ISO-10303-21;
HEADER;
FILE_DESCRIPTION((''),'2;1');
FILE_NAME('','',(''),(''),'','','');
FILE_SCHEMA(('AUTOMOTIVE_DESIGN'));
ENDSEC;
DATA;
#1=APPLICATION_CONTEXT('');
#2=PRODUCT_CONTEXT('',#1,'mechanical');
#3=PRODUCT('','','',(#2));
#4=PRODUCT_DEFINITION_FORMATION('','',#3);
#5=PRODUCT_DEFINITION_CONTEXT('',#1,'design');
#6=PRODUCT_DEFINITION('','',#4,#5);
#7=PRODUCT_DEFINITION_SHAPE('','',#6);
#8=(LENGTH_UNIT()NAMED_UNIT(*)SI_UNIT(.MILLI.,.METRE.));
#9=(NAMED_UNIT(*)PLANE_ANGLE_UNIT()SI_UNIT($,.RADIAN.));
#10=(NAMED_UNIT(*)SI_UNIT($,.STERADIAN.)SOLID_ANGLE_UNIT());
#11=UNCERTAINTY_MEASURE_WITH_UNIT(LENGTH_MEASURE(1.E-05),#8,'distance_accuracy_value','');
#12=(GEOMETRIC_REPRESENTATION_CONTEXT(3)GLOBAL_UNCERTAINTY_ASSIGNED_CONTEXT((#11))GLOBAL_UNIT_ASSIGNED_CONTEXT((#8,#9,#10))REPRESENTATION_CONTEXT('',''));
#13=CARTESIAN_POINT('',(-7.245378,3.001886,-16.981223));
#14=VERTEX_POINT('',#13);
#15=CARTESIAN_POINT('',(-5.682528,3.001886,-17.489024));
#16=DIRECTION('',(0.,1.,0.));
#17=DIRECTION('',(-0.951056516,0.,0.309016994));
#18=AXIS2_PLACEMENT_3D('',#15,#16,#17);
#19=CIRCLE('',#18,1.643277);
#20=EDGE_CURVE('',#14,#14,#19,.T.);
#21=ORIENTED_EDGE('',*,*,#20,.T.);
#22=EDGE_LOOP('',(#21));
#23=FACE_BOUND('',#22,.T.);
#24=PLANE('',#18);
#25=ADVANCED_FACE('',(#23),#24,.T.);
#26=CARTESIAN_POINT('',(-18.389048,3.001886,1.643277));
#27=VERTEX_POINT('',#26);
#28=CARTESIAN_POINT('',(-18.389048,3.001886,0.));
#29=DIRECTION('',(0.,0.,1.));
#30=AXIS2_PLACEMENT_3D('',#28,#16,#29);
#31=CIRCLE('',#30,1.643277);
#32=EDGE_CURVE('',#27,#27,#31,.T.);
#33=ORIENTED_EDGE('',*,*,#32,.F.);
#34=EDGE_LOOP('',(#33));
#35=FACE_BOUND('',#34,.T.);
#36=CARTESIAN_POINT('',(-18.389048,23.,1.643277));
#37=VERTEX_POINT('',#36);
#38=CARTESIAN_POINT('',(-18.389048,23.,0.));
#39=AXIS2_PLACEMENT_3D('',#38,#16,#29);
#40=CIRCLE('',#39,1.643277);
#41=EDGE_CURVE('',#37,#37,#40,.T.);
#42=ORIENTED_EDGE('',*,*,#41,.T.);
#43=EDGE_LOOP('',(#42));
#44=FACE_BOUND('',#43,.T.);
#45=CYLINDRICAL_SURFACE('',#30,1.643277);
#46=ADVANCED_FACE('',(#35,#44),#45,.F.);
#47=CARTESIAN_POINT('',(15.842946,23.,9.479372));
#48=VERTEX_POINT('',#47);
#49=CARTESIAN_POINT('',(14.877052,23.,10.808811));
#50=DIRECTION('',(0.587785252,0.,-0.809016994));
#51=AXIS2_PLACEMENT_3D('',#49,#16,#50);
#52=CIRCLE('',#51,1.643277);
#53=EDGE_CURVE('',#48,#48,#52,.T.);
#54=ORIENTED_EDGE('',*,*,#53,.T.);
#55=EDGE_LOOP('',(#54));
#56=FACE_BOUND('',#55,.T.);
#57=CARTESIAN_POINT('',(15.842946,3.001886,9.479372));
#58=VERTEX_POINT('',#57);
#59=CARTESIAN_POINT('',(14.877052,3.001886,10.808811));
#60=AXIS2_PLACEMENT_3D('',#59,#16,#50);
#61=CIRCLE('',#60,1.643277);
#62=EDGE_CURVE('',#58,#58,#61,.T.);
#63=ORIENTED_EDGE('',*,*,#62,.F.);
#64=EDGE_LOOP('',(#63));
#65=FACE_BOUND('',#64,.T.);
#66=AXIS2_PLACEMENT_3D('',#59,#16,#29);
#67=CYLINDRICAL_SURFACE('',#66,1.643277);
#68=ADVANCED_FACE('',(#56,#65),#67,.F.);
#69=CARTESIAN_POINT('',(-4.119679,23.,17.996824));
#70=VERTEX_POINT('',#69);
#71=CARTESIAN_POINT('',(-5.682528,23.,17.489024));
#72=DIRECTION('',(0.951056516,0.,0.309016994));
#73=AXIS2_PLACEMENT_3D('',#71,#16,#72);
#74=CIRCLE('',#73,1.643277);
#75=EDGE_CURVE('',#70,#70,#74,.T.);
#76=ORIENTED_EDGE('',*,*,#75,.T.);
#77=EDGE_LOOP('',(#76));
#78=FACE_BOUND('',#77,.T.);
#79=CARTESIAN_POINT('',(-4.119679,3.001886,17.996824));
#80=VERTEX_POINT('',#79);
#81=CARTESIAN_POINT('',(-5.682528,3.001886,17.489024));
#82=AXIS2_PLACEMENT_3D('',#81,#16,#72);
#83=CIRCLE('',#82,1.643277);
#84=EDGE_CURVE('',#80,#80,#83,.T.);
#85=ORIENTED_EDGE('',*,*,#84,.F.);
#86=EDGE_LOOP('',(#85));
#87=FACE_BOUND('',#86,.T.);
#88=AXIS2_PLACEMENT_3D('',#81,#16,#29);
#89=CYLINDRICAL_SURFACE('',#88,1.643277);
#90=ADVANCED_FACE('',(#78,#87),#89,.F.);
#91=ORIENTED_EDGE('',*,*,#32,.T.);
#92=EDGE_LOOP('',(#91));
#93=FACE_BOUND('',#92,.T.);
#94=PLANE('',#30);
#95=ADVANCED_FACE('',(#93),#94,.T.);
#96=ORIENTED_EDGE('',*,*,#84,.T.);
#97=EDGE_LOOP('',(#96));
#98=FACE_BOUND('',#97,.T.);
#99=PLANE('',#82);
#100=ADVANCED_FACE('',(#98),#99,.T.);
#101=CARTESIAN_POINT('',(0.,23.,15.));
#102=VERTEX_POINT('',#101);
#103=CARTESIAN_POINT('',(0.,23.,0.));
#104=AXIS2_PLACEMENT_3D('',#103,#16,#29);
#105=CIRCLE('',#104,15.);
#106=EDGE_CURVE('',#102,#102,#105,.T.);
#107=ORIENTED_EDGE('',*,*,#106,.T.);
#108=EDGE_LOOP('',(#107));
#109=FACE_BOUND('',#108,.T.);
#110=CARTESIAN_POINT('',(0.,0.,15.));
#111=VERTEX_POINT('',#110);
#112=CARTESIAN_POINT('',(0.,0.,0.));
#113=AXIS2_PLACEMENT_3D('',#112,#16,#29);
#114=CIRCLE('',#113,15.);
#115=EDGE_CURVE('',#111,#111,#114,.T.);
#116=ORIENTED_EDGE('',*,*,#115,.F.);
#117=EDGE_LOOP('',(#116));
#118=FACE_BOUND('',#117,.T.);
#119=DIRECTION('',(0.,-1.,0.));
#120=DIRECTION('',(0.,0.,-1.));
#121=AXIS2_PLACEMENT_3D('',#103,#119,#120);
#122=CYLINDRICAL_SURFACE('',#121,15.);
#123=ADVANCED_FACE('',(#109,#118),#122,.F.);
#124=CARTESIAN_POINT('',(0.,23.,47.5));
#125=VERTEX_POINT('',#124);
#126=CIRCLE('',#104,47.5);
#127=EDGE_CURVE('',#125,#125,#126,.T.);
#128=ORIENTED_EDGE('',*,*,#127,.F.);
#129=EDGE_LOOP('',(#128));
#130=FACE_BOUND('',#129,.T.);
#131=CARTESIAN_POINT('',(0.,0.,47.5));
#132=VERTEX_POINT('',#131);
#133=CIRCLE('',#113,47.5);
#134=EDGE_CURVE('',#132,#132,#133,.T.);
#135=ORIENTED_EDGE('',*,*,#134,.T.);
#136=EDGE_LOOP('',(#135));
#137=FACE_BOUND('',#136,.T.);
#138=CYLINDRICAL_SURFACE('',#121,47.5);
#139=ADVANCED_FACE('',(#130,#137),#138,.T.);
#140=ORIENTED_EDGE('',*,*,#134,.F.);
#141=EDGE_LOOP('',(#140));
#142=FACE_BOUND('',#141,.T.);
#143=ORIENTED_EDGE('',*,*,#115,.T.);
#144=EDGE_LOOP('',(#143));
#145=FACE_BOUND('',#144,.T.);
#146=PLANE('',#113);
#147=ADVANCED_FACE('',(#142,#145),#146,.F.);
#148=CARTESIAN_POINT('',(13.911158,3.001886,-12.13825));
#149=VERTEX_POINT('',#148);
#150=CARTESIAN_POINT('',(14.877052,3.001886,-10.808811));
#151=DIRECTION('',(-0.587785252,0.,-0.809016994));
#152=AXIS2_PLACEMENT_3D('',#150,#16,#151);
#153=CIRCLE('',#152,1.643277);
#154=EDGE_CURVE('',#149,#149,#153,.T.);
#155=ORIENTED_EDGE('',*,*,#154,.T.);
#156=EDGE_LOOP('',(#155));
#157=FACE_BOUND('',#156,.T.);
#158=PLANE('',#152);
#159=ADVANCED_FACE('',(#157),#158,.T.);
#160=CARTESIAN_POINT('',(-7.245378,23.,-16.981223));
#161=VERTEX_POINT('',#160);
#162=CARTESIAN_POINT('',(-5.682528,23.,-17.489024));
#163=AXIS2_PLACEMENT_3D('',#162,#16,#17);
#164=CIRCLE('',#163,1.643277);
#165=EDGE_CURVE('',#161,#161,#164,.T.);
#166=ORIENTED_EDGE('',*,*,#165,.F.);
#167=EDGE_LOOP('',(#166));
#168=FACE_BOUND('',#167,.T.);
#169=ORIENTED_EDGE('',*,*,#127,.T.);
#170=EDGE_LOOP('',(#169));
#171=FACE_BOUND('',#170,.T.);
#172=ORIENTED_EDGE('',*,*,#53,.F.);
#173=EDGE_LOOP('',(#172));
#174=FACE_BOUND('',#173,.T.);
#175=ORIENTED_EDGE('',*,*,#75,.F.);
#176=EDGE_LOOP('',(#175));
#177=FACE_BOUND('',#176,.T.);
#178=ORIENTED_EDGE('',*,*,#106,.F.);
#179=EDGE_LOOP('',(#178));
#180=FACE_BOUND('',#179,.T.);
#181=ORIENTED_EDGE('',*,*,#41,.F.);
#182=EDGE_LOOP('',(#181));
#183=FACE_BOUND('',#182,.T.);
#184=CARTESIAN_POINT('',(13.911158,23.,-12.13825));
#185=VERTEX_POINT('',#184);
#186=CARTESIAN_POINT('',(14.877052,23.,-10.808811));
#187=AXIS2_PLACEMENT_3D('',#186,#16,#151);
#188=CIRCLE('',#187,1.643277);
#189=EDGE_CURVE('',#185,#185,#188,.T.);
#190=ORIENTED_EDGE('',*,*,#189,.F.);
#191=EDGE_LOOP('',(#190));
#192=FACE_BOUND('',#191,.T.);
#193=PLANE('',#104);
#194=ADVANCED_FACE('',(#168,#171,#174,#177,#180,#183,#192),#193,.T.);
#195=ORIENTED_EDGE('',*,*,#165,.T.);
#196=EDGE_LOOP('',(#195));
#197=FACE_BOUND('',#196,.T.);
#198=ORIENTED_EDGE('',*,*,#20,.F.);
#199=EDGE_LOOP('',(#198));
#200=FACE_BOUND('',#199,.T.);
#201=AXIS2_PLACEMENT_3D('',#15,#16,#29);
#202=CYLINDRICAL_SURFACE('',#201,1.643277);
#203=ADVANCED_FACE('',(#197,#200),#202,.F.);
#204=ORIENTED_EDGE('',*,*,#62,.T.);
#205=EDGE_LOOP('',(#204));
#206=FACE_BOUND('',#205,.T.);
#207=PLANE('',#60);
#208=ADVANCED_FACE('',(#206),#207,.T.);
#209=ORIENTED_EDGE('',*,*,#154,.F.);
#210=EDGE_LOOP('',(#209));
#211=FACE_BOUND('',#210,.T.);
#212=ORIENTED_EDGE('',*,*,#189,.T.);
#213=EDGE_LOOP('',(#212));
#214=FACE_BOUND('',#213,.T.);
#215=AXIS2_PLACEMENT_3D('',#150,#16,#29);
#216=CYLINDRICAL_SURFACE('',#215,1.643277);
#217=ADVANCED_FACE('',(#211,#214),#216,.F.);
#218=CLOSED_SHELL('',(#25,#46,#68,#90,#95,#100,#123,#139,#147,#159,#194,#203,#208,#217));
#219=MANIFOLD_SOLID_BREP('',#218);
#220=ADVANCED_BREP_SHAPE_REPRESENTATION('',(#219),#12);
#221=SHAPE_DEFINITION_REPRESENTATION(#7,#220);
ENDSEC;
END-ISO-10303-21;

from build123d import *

# Parameters (mm, degrees)
SKETCH1_R           = 47.5
BOSS_EXTRUDE1_DEPTH = 23
SKETCH2_R           = 15
CUT_EXTRUDE1_DEPTH  = 72.003521039
SKETCH3_R           = 1.643277369
CUT_EXTRUDE2_DEPTH  = 19.998113982
CIRPATTERN1_COUNT   = 5


with BuildPart() as part:
    # Sketch1 → Boss-Extrude1 (new body)
    with BuildSketch(Plane(origin=(0, 0, 0), x_dir=(1, 0, 0), z_dir=(0, 1, 0))):
        Circle(SKETCH1_R)
    extrude(amount=BOSS_EXTRUDE1_DEPTH)

    # Sketch2 → Cut-Extrude1 (cut, through all)
    with BuildSketch(Plane(origin=(0, 0, 0), x_dir=(1, 0, 0), z_dir=(0, 1, 0))):
        Circle(SKETCH2_R)
    extrude(amount=CUT_EXTRUDE1_DEPTH, mode=Mode.SUBTRACT)

    # Sketch3 → Cut-Extrude2 (cut)
    with BuildSketch(Plane(origin=(0, 23, 0), x_dir=(1, 0, 0), z_dir=(0, 1, 0))):
        with Locations((-18.389047802, 0)):
            Circle(SKETCH3_R)
    cut_extrude2 = extrude(amount=-CUT_EXTRUDE2_DEPTH, mode=Mode.SUBTRACT)

    # CirPattern1: Cut-Extrude2 ×5 about axis
    cirpattern1_axis = Axis((0, 0, 0), (0, 1, 0))
    for i in range(1, CIRPATTERN1_COUNT):
        add(cut_extrude2.rotate(cirpattern1_axis, i * 360 / CIRPATTERN1_COUNT), mode=Mode.SUBTRACT)


solid = part.part
